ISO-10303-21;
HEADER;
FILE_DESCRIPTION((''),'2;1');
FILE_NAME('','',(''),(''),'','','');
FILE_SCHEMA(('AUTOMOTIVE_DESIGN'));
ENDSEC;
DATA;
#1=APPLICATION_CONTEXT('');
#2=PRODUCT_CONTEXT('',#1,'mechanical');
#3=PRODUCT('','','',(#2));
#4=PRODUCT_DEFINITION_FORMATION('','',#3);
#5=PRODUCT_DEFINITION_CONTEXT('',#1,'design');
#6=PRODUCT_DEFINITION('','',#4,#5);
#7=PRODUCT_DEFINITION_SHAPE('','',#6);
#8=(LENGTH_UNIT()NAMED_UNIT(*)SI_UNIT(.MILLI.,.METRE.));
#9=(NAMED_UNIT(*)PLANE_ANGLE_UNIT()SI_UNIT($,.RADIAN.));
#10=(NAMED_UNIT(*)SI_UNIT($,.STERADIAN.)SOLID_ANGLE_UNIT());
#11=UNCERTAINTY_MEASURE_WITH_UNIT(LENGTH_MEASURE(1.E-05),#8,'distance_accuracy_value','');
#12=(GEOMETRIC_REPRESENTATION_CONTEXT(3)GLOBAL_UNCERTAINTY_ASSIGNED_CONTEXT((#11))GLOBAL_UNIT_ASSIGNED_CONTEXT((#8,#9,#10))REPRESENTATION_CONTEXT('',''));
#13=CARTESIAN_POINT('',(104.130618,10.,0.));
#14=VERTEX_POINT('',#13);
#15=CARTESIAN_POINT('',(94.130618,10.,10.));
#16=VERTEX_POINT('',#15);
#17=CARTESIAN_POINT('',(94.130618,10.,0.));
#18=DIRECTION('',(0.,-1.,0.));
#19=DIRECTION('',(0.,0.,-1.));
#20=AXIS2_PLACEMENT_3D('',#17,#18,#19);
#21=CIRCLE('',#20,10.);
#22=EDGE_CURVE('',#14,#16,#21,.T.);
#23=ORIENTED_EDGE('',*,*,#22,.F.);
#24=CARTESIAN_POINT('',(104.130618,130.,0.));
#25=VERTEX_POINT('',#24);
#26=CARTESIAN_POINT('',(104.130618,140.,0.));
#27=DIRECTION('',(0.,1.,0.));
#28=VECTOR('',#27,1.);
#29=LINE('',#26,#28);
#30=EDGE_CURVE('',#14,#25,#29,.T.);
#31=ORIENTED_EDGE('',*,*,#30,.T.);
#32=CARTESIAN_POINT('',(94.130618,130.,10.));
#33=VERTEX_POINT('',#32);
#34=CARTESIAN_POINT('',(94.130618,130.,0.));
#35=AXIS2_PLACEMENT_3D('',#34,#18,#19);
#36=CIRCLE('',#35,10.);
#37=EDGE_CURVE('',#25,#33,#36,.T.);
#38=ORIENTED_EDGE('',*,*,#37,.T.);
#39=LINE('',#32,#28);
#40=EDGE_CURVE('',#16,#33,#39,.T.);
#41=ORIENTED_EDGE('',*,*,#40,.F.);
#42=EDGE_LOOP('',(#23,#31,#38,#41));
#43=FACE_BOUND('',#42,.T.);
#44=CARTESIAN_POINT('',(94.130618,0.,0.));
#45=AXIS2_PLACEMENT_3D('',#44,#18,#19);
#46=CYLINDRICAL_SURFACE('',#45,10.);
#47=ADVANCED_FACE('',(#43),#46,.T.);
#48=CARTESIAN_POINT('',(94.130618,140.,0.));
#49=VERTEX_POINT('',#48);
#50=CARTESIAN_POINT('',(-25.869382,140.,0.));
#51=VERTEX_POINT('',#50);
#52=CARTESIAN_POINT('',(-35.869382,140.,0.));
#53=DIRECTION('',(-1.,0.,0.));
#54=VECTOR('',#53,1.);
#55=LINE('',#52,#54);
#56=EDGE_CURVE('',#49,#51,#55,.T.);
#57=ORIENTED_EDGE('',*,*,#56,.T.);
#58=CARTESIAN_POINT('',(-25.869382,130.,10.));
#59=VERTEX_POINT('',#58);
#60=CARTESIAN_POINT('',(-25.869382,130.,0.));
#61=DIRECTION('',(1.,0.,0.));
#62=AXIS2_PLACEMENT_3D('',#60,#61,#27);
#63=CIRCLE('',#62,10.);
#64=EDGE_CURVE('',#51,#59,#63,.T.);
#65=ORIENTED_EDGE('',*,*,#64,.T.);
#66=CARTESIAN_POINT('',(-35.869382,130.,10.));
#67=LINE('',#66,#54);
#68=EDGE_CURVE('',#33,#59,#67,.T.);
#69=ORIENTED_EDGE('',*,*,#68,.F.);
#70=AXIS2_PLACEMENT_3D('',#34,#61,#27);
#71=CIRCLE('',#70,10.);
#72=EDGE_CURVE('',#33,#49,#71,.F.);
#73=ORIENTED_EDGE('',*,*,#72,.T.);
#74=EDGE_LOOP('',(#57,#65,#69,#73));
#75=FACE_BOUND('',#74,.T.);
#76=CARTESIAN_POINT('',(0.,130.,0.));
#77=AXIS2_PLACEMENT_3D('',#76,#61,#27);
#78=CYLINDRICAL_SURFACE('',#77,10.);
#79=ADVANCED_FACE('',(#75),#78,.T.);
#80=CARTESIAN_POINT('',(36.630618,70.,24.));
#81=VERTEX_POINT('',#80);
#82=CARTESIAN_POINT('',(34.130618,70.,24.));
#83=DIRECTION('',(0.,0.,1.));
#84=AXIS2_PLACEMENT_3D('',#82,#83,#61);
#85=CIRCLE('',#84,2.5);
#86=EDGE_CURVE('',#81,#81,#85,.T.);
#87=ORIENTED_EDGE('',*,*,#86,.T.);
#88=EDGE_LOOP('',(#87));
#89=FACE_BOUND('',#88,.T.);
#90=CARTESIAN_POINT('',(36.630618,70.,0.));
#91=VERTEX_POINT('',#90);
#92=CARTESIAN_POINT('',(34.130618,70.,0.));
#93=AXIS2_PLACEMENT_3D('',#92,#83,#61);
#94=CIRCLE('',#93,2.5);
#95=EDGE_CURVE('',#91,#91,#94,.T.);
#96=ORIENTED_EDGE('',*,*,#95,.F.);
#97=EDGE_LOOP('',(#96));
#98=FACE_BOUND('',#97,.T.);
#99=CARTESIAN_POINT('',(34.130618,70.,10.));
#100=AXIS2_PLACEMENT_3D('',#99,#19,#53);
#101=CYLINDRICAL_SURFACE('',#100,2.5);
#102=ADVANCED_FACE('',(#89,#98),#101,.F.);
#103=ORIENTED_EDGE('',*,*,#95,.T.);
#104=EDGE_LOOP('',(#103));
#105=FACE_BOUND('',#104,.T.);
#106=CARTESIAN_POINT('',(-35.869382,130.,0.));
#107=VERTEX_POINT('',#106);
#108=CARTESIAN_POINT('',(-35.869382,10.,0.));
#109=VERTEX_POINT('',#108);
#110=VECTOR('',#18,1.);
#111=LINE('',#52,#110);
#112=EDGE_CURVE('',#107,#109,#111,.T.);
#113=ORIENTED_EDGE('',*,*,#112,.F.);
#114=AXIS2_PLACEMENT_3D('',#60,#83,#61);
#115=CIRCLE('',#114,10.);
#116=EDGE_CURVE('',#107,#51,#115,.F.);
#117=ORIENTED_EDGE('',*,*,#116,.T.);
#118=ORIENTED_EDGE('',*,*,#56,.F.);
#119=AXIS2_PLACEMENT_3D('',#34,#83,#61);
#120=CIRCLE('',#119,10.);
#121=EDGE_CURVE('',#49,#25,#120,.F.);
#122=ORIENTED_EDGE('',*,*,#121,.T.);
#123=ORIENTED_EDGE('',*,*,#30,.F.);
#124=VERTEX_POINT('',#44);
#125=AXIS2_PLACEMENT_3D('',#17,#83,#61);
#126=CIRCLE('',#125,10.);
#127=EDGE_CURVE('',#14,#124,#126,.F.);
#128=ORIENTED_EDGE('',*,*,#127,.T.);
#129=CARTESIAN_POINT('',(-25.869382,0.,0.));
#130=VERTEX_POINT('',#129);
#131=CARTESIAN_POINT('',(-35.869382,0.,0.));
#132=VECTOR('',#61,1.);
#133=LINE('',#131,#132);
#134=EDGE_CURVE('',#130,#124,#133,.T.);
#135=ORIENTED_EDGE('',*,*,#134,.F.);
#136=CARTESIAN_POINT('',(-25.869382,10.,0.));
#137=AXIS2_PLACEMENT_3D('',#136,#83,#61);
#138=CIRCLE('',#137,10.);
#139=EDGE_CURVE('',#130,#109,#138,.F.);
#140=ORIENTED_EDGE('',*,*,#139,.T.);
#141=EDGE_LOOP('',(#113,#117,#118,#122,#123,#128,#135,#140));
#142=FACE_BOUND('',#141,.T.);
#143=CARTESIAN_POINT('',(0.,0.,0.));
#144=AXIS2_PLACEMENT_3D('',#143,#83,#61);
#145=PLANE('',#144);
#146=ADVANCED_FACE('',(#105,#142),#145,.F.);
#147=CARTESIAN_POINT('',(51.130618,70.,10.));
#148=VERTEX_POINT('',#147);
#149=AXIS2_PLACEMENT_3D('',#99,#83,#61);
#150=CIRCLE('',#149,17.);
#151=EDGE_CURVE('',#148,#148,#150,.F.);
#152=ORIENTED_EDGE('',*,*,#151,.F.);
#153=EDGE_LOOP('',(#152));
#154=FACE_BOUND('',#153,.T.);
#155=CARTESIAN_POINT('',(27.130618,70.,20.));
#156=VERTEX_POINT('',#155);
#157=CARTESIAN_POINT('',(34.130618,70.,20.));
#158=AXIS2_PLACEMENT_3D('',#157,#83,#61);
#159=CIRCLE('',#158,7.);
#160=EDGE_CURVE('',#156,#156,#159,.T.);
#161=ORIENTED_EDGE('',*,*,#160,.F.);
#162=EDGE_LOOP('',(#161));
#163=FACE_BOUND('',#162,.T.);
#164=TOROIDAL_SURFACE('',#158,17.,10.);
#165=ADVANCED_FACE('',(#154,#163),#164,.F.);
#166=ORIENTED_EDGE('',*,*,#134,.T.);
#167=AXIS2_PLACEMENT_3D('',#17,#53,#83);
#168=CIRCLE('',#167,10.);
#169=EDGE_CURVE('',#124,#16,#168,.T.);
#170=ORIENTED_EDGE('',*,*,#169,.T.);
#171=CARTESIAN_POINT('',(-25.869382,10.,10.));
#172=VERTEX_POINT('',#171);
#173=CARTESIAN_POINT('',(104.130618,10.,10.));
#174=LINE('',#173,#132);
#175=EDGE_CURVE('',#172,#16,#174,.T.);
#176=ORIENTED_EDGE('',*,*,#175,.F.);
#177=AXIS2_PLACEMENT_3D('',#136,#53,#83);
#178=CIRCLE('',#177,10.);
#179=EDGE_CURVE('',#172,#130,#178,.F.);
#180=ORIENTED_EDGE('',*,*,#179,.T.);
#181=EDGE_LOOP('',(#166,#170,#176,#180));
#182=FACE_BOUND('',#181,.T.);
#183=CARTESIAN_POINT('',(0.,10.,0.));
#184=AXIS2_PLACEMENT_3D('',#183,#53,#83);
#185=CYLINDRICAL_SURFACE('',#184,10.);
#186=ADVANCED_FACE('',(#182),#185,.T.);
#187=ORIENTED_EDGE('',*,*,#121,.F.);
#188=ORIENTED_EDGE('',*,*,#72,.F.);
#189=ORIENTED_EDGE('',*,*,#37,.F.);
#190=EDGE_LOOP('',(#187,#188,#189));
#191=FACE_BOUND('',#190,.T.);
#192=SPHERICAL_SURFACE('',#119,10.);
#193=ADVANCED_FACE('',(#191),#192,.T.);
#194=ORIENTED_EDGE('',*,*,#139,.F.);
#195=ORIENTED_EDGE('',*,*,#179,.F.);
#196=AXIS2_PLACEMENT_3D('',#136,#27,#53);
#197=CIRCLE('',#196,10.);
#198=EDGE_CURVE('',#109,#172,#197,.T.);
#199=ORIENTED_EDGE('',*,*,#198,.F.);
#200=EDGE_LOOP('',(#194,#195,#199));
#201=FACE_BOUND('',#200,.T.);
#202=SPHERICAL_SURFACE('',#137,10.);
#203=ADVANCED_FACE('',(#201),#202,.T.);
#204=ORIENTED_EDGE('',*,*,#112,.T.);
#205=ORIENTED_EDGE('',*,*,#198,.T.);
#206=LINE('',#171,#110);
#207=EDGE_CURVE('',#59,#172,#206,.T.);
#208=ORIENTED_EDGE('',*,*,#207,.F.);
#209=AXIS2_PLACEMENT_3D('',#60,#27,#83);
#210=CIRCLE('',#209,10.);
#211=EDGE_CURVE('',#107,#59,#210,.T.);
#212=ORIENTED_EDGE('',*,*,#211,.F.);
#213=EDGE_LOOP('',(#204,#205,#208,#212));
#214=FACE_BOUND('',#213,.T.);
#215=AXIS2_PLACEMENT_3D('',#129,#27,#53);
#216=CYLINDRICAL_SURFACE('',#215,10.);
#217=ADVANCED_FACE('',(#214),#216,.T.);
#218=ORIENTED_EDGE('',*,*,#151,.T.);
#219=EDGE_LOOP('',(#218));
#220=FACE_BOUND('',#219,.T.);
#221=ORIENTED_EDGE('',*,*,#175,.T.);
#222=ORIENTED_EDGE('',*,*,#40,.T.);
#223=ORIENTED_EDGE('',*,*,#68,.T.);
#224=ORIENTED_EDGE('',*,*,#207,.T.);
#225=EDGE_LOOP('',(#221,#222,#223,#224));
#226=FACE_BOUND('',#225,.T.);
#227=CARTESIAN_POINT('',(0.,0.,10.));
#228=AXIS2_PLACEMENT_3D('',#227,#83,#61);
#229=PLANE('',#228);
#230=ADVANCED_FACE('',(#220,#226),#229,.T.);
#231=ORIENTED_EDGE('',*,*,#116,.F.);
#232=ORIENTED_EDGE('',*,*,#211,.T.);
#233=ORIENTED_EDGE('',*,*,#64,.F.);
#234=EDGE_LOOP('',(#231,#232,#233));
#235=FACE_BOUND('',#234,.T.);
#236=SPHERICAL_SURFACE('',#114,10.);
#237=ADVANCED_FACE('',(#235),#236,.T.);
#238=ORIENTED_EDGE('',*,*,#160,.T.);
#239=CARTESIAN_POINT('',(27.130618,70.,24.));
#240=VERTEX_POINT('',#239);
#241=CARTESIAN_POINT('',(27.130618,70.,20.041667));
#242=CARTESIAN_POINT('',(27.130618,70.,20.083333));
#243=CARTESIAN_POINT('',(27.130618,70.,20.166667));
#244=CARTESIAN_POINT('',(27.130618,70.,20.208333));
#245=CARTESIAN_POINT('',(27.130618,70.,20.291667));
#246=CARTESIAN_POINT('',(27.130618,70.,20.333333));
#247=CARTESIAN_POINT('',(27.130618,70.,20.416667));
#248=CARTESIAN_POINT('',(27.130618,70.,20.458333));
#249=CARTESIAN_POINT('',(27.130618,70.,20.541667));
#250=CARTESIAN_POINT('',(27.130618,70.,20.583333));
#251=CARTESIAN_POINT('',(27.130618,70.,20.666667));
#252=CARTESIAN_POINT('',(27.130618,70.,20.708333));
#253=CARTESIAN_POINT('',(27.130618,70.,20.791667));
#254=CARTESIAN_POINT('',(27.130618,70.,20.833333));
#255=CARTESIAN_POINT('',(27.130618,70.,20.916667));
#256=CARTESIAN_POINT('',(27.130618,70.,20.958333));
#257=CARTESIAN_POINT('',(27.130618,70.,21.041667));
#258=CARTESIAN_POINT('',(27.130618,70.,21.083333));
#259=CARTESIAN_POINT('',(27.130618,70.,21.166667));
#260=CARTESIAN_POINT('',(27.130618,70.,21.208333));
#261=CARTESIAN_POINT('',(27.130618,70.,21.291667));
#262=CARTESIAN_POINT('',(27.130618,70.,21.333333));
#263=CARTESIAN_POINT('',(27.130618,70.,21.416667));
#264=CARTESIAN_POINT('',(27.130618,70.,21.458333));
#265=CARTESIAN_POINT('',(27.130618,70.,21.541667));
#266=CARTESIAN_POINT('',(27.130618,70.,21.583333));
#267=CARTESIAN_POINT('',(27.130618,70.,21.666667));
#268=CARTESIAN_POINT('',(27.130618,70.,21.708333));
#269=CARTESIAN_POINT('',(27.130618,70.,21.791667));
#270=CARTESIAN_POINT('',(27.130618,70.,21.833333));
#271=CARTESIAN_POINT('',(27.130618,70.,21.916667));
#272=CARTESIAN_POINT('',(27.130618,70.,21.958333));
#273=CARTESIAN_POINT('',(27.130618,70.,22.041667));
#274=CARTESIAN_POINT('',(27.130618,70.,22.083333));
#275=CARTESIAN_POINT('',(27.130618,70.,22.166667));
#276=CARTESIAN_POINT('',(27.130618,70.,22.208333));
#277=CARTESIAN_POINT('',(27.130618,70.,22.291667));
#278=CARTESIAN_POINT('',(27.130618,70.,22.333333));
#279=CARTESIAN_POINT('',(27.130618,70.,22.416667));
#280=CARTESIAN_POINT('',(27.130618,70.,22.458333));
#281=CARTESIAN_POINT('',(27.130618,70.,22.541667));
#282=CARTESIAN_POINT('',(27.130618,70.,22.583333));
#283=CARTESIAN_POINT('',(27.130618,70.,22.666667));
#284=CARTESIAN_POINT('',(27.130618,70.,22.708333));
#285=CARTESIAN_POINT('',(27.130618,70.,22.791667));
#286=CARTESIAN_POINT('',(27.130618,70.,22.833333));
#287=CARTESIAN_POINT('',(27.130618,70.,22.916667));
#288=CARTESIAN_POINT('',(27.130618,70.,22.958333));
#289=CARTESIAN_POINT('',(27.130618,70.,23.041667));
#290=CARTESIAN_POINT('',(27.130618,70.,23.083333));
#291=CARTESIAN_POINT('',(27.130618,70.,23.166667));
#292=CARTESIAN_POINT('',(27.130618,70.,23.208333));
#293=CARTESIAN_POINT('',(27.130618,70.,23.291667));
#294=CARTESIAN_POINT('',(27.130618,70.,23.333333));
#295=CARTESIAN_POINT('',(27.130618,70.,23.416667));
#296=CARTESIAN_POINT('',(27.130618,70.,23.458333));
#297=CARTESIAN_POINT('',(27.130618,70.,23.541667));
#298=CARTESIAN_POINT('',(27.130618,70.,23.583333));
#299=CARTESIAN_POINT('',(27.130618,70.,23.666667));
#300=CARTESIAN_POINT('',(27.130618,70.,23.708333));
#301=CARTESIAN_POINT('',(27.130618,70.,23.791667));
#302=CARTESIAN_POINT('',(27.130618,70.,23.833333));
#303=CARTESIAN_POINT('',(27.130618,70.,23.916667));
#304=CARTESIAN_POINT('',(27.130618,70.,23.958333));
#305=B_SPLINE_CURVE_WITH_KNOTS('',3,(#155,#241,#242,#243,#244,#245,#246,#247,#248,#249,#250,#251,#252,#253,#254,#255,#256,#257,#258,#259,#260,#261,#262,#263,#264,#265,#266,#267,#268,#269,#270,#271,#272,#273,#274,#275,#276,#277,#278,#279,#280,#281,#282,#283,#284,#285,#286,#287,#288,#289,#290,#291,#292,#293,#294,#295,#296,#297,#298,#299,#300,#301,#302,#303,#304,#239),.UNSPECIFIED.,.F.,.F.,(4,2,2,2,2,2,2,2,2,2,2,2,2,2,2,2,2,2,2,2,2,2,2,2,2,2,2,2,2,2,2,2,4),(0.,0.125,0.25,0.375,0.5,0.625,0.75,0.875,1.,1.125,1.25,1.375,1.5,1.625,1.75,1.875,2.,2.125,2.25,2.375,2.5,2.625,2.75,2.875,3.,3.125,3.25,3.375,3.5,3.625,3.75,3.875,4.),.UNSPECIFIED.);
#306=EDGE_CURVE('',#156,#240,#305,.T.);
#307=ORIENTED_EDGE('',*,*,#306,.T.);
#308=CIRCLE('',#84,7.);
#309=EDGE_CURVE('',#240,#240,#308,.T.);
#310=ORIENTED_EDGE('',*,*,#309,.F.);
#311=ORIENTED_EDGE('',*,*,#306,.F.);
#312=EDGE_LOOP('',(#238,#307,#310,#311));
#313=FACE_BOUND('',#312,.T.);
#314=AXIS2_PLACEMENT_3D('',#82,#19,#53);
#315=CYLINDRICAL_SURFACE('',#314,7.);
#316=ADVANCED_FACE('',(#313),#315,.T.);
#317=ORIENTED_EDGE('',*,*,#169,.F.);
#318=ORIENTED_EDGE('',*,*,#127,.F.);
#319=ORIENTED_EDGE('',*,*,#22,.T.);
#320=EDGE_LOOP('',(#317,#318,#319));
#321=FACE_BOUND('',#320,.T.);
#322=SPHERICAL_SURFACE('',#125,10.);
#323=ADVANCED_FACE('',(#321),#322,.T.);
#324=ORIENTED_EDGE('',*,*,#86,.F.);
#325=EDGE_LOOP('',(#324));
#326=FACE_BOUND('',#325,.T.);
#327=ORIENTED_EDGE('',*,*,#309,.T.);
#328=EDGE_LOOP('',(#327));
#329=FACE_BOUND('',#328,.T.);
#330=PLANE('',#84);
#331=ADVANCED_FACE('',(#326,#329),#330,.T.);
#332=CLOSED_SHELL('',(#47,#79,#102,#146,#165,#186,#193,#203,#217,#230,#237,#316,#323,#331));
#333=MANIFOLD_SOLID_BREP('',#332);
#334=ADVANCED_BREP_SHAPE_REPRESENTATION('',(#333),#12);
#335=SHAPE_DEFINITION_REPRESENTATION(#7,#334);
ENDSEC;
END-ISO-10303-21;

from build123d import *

# Parameters (mm, degrees)
ESBO_O1_W                = 140
ESBO_O1_H                = 140
ESBO_O1_R                = 2.5
RESSALTO_EXTRUS_O1_DEPTH = 10
ESBO_O2_R                = 7
ESBO_O2_R_2              = 2.5
RESSALTO_EXTRUS_O2_DEPTH = 24
FILETE1_R                = 10
FILETE2_R                = 10
FILETE3_R                = 10
FILETE4_R                = 10
FILETE5_R                = 10


with BuildPart() as part:
    # Esboço1 → Ressalto-extrusão1 (new body)
    with BuildSketch(Plane.XY):
        with Locations((34.130618452, 70)):
            Rectangle(ESBO_O1_W, ESBO_O1_H)
        with Locations((34.130618452, 70)):
            Circle(ESBO_O1_R, mode=Mode.SUBTRACT)
    extrude(amount=RESSALTO_EXTRUS_O1_DEPTH)

    # Esboço2 → Ressalto-extrusão2 (add)
    with BuildSketch(Plane.XY):
        with Locations(Location((34.130618452, 70, 0), (0, 0, 180))):
            Circle(ESBO_O2_R)
        with Locations((34.130618452, 70)):
            Circle(ESBO_O2_R_2, mode=Mode.SUBTRACT)
    extrude(amount=RESSALTO_EXTRUS_O2_DEPTH)

    # Filete1
    filete1_edges = [part.edges().sort_by_distance(p)[0] for p in [
        (34.130618452, 0, 10),
    ]]
    fillet(filete1_edges, radius=FILETE1_R - 0.0001)  # a hair under: the kernel refuses the full size

    # Filete2
    filete2_edges = [part.edges().sort_by_distance(p)[0] for p in [
        (34.130618452, 140, 10),
    ]]
    fillet(filete2_edges, radius=FILETE2_R - 0.0001)  # a hair under: the kernel refuses the full size

    # Filete3
    filete3_edges = [part.edges().sort_by_distance(p)[0] for p in [
        (-35.869381548, 2.928902899, 7.071097101),
        (-35.869381548, 70, 10),
        (-35.869381548, 137.071097101, 7.071097101),
    ]]
    fillet(filete3_edges, radius=FILETE3_R - 0.0001)  # a hair under: the kernel refuses the full size

    # Filete4
    filete4_edges = [part.edges().sort_by_distance(p)[0] for p in [
        (104.130618452, 70, 10),
        (104.130618452, 2.928902899, 7.071097101),
        (104.130618452, 137.071097101, 7.071097101),
    ]]
    fillet(filete4_edges, radius=FILETE4_R - 0.0001)  # a hair under: the kernel refuses the full size

    # Filete5
    filete5_edges = [part.edges().sort_by_distance(p)[0] for p in [
        (41.130618452, 70, 10),
    ]]
    fillet(filete5_edges, radius=FILETE5_R)


solid = part.part
